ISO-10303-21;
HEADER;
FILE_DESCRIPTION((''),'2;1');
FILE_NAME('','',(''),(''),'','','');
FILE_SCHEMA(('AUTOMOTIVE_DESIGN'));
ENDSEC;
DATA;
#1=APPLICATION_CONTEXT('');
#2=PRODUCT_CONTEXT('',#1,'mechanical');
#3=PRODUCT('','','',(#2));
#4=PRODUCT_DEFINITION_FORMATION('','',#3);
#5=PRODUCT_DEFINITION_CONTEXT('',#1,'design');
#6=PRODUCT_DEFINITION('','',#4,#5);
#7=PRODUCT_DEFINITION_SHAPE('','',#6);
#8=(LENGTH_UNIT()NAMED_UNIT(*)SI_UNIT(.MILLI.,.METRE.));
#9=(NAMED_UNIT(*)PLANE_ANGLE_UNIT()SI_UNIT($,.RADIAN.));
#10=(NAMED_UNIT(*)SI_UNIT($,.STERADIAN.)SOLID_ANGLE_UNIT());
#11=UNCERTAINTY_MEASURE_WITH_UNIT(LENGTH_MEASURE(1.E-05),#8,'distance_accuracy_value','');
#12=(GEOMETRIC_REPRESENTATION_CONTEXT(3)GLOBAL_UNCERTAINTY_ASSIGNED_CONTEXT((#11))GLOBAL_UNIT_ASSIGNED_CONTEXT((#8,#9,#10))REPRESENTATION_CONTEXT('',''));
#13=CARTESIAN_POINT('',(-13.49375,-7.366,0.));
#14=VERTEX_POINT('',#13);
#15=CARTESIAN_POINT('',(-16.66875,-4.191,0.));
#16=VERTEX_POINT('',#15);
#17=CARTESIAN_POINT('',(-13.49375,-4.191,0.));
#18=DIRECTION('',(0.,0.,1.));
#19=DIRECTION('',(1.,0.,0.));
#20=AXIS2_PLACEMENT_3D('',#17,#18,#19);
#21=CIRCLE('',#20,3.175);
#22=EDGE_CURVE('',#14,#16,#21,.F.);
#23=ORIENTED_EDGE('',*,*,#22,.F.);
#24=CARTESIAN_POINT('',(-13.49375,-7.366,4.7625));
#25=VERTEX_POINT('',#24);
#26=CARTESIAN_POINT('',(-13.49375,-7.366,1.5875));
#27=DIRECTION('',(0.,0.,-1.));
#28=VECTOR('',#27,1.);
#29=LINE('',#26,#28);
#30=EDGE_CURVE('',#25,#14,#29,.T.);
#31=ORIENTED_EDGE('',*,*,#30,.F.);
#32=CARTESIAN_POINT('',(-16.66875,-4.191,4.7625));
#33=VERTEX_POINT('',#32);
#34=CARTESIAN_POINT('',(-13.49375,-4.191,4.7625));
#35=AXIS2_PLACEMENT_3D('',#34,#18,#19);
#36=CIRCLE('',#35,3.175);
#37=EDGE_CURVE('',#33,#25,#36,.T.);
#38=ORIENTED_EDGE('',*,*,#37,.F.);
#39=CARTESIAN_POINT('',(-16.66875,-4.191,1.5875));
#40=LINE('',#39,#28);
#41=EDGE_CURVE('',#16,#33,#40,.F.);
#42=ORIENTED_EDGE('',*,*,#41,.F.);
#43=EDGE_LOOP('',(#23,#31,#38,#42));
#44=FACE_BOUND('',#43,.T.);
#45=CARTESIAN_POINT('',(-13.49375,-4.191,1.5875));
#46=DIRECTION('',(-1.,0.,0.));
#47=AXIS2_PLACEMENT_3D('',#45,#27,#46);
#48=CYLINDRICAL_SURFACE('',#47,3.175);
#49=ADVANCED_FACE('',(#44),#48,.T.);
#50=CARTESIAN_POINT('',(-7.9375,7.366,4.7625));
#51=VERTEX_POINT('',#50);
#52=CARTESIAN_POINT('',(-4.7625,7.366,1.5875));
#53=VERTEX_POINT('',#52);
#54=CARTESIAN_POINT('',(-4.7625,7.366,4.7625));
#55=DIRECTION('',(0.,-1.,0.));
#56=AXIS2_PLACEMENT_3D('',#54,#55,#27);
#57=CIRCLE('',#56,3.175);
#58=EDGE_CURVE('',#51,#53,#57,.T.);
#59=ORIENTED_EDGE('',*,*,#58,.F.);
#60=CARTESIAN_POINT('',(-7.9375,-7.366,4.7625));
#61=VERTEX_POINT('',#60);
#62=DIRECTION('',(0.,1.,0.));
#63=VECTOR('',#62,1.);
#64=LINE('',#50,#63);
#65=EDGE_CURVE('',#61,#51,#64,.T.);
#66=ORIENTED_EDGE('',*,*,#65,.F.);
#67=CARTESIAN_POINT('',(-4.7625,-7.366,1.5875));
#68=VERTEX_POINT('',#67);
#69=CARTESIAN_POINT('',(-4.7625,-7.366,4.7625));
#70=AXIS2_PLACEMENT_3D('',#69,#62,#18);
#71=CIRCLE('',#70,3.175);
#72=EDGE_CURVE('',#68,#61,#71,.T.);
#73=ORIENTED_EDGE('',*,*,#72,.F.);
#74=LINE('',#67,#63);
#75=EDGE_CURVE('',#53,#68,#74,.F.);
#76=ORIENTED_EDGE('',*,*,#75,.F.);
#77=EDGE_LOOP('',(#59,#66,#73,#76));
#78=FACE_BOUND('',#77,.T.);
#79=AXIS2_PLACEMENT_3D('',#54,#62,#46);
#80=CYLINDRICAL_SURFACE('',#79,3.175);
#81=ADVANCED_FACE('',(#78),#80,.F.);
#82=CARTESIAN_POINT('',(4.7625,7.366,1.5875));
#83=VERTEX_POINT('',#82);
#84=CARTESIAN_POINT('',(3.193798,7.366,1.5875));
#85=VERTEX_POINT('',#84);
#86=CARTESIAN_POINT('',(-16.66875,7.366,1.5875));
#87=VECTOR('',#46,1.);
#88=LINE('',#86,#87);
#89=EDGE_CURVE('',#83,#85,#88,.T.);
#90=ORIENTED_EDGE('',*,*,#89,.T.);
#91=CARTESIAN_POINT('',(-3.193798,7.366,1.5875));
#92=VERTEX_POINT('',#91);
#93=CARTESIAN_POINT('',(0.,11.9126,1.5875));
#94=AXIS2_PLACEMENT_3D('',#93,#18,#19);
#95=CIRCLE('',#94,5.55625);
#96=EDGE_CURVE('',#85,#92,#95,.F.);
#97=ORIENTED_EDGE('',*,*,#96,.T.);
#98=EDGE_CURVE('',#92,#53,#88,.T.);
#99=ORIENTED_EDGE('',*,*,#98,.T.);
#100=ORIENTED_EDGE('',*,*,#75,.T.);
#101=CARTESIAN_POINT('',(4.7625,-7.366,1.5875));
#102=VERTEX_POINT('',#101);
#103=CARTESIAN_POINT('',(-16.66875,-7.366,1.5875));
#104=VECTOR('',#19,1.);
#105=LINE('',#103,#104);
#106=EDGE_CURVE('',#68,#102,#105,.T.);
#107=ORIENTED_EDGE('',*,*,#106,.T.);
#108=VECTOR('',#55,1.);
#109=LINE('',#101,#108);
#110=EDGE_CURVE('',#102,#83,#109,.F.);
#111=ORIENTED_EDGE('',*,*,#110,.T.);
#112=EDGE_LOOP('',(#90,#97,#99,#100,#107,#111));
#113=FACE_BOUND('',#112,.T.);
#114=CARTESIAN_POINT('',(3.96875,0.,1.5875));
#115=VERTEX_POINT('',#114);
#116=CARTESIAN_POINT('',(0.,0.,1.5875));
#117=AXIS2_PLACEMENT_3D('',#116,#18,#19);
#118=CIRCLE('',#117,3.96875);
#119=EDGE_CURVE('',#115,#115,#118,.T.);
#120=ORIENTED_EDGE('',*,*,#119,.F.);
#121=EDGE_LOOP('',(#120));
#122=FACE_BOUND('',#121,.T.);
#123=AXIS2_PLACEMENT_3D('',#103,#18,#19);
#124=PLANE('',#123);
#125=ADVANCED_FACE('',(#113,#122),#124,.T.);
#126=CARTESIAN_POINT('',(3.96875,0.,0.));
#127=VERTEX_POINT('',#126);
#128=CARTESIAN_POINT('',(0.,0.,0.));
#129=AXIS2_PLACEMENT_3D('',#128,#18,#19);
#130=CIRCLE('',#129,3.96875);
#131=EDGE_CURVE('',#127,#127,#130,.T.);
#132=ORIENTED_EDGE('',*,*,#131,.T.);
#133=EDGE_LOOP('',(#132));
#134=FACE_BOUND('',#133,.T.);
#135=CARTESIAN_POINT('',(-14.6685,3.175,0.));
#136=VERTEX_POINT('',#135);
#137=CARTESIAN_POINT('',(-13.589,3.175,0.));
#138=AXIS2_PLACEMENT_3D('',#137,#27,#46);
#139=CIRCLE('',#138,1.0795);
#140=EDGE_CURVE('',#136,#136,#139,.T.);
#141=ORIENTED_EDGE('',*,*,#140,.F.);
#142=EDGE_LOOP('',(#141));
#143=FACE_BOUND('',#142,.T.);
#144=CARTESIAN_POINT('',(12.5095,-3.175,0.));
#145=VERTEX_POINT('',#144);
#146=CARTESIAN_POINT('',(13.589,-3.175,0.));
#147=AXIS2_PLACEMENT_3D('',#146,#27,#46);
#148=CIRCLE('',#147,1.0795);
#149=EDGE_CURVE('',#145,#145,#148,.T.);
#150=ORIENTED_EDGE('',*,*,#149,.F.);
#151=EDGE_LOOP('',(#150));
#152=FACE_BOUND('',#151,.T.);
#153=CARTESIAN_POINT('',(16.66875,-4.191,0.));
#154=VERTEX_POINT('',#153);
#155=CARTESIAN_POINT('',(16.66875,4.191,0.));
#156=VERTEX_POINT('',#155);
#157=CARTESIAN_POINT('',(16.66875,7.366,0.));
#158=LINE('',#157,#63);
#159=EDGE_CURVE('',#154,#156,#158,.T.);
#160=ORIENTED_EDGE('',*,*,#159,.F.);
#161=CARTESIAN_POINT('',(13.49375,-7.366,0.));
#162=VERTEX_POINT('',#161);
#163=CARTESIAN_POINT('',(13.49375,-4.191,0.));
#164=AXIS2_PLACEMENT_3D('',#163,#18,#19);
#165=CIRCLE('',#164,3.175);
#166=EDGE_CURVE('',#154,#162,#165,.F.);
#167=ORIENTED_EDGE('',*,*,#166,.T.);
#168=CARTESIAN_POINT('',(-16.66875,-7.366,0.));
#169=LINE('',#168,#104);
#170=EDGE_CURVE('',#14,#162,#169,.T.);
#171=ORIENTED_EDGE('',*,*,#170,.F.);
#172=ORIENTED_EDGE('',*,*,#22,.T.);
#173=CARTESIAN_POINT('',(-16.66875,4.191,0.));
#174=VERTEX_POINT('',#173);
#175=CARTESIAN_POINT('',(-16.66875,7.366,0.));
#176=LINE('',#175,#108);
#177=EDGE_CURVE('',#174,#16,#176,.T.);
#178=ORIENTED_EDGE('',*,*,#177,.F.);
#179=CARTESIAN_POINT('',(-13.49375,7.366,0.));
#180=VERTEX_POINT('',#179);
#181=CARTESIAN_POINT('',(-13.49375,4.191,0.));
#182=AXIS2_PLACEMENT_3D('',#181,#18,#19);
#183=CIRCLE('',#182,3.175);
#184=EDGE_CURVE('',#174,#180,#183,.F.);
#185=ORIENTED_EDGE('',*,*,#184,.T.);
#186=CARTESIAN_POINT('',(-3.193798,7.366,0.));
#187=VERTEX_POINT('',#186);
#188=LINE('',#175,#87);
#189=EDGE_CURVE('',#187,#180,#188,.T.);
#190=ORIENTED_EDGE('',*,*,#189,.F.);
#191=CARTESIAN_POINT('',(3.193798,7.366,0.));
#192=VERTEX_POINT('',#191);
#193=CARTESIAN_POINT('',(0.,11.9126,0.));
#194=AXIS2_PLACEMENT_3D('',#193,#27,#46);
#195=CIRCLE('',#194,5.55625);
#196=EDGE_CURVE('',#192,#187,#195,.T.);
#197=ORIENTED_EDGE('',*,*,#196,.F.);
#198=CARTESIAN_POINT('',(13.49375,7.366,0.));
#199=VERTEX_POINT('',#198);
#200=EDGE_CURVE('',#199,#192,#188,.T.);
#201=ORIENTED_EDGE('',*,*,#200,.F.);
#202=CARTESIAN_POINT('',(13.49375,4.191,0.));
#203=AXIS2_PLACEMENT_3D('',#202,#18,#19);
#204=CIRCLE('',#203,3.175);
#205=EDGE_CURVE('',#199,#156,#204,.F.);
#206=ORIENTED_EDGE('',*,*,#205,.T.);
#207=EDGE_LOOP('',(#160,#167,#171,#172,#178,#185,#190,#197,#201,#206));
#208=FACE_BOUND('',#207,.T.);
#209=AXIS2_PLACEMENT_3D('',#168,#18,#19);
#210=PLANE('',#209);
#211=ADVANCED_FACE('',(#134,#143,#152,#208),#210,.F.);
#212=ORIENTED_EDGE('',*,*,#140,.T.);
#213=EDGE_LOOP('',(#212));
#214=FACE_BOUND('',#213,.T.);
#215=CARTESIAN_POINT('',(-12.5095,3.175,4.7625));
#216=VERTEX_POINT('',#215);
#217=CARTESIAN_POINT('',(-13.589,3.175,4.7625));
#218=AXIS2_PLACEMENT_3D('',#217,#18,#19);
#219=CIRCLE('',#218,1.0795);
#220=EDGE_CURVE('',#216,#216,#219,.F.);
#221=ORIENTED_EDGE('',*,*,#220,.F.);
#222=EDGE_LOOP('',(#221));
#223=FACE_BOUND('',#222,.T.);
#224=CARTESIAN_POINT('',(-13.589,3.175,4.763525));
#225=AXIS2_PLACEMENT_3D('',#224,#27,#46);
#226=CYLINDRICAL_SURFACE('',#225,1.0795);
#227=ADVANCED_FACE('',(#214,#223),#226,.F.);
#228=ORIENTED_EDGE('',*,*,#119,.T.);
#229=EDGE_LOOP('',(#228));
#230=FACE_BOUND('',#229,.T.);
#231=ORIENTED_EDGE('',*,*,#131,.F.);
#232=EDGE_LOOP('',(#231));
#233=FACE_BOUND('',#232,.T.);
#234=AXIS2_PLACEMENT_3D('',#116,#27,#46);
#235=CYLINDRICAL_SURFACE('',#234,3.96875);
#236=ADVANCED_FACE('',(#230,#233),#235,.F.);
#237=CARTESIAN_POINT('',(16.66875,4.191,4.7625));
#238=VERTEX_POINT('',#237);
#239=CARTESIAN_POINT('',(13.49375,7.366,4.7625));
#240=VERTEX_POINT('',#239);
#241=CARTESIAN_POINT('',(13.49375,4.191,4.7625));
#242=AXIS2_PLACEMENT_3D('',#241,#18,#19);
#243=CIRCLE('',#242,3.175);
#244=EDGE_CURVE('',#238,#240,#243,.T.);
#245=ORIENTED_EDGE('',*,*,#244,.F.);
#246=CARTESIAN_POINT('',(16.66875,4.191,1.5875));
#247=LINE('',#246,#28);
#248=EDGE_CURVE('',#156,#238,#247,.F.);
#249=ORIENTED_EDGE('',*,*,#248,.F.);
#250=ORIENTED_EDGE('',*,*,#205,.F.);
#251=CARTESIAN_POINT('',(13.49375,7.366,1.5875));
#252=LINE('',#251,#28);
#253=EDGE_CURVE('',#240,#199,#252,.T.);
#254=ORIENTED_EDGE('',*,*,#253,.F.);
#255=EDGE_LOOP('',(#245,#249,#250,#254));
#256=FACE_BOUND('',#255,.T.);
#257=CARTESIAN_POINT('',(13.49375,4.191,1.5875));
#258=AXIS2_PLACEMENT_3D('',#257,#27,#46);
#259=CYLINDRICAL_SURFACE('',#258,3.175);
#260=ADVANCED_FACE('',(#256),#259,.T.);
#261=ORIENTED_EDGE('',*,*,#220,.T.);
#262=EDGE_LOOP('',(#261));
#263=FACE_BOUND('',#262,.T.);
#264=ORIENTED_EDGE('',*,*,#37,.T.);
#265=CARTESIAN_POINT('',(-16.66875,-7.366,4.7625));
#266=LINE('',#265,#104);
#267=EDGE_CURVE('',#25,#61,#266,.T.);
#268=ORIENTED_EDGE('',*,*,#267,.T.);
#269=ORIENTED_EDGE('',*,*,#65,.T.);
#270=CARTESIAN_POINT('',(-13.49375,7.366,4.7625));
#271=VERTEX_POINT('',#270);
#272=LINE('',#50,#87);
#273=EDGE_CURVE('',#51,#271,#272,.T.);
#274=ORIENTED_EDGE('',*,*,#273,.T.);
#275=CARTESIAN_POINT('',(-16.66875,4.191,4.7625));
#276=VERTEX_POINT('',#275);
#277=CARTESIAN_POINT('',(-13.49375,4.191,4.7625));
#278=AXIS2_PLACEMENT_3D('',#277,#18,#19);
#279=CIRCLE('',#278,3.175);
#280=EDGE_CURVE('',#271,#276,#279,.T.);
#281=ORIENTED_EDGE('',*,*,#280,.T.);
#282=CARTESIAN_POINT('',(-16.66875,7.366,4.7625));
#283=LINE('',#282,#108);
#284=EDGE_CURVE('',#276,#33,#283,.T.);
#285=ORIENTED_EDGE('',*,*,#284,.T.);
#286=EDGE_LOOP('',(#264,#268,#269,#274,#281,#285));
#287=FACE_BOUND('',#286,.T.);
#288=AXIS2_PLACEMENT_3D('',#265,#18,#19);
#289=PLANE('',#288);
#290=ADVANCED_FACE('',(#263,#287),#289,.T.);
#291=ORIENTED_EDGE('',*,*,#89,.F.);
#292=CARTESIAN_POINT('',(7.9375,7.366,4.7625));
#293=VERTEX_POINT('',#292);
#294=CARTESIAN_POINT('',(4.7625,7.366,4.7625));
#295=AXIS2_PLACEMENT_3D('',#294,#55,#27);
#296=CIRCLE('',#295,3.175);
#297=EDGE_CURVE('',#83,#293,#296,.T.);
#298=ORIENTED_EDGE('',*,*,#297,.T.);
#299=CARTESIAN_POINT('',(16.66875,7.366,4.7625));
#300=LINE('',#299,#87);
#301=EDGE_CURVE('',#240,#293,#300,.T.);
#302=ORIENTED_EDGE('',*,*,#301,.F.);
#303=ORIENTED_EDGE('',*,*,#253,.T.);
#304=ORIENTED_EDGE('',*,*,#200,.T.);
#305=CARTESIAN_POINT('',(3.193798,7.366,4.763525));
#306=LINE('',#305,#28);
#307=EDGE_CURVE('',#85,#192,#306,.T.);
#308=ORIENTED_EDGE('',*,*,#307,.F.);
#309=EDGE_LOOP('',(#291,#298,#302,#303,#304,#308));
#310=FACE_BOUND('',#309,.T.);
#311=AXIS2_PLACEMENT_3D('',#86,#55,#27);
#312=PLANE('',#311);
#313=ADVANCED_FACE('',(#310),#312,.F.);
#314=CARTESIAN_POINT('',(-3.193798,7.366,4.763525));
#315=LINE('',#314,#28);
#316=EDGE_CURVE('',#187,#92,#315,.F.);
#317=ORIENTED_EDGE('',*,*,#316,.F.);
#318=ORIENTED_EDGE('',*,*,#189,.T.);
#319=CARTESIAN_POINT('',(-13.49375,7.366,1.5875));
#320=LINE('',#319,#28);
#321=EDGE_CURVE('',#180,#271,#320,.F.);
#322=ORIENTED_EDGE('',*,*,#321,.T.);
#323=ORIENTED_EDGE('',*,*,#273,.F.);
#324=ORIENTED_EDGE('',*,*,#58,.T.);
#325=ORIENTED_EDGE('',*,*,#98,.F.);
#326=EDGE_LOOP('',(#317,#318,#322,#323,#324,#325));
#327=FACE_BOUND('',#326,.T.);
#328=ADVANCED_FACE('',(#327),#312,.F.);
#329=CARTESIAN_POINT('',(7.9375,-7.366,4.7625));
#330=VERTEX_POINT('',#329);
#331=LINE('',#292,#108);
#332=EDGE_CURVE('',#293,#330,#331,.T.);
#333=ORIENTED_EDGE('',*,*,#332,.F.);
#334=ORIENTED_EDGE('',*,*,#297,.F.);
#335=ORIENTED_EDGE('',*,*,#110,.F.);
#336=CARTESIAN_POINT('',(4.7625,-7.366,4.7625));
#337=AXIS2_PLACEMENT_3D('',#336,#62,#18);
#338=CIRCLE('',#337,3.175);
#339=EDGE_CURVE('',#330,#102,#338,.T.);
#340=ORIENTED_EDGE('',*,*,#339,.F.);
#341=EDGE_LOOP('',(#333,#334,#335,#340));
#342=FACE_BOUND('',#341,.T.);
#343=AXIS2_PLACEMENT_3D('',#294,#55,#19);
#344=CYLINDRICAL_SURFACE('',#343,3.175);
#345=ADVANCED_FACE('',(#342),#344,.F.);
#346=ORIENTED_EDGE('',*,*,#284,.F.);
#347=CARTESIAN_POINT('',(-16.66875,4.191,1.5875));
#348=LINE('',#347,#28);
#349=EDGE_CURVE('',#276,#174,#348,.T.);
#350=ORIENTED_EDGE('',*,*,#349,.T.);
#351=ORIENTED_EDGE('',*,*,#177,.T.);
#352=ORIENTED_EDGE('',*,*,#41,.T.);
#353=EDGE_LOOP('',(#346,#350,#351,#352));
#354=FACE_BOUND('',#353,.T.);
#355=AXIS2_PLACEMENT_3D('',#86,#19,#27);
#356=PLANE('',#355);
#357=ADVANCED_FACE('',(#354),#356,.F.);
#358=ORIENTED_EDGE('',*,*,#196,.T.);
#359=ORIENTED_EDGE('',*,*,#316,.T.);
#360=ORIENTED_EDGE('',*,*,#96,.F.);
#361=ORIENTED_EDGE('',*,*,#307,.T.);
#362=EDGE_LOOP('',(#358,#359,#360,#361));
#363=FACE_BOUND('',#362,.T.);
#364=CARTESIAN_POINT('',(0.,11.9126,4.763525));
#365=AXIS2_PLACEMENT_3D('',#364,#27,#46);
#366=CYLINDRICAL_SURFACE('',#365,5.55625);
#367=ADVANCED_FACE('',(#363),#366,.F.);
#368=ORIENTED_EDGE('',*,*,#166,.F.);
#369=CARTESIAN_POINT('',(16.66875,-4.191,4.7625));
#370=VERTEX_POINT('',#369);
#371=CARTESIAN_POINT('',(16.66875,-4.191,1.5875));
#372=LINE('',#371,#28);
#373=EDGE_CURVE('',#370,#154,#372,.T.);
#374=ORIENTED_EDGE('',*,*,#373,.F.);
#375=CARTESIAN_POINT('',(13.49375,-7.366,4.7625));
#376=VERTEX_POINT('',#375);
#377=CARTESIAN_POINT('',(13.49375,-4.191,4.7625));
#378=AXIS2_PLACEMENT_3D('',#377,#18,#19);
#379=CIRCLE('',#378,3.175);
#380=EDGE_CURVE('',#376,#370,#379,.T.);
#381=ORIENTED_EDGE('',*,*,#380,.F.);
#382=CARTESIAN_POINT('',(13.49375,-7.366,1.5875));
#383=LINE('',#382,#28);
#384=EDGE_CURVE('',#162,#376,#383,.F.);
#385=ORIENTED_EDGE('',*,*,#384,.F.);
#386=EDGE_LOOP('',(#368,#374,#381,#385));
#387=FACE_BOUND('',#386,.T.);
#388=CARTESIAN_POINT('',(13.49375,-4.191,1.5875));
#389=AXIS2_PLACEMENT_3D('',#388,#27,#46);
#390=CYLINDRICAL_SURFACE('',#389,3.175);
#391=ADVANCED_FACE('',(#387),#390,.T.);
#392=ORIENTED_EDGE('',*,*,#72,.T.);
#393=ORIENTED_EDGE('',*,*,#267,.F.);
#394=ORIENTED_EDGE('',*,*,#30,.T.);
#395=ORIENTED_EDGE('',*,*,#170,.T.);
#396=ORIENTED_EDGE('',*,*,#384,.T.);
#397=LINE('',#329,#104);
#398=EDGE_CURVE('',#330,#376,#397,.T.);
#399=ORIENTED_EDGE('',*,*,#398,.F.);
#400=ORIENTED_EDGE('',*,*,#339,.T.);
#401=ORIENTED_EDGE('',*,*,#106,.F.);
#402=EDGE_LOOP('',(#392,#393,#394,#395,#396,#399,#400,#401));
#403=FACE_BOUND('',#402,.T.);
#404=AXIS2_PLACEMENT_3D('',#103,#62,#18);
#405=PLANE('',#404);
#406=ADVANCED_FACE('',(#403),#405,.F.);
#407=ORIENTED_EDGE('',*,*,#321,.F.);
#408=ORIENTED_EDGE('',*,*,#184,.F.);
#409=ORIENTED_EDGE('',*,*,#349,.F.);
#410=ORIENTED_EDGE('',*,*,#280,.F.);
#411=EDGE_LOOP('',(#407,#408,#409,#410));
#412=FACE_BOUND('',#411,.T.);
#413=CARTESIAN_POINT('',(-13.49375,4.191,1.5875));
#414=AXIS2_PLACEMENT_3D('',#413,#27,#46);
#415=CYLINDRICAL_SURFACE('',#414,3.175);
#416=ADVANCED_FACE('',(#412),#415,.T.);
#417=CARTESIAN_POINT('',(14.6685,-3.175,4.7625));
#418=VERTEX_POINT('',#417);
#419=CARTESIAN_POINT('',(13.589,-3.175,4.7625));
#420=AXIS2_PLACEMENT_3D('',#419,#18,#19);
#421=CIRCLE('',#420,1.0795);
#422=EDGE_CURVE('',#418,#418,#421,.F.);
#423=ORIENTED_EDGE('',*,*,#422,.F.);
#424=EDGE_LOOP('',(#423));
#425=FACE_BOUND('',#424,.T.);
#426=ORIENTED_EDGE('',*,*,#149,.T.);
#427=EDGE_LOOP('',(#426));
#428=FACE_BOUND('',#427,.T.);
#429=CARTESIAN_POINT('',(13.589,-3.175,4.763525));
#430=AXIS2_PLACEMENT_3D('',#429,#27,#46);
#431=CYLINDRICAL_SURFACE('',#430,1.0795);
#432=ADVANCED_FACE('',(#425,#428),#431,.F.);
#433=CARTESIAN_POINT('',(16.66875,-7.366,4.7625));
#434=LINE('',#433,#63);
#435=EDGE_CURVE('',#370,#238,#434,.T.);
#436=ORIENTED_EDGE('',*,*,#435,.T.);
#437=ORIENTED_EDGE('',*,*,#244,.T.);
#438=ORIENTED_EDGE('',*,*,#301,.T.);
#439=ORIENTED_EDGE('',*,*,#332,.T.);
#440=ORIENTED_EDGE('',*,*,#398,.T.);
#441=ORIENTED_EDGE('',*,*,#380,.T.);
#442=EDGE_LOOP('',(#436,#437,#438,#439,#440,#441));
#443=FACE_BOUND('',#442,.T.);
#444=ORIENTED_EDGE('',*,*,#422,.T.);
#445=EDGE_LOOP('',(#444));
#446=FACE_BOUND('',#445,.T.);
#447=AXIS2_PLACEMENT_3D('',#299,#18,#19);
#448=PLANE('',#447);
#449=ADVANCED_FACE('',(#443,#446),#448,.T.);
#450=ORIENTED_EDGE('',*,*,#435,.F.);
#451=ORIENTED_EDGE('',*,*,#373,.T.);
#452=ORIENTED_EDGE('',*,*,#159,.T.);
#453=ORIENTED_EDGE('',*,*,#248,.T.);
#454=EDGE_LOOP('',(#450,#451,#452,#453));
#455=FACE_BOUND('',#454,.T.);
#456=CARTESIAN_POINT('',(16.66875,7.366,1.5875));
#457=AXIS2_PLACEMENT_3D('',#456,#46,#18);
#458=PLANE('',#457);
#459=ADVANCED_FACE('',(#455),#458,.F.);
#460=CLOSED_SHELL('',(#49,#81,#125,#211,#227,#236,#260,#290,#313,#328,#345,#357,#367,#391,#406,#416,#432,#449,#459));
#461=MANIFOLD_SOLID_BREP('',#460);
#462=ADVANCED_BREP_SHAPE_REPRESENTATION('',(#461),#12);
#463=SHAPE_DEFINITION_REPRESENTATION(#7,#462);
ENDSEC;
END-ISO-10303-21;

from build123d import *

# Parameters (mm, degrees)
SKETCH1_W          = 33.3375
SKETCH1_H          = 14.732
SKETCH1_R          = 3.96875
EXTRUDE1_DEPTH     = 1.5875
SKETCH3_W          = 8.73125
SKETCH3_H          = 14.732
EXTRUDE2_DEPTH     = 3.175
CUT_EXTRUDE1_START = -4.7625
SKETCH2_R          = 1.0795
SKETCH2_R_2        = 5.55625
CUT_EXTRUDE1_DEPTH = 4.7625
FILLET2_R          = 3.175
SPLIT1_DEPTH       = 4.7625


# Read off the part's stored shape, not the designer's step: Split1
with BuildPart() as part:
    # Sketch1 → Extrude1 (new body)
    with BuildSketch(Plane.XY):
        Rectangle(SKETCH1_W, SKETCH1_H)
        Circle(SKETCH1_R, mode=Mode.SUBTRACT)
    extrude(amount=EXTRUDE1_DEPTH)

    # Sketch3 → Extrude2 (add)
    with BuildSketch(Plane.XY.offset(1.5875)):
        with Locations((-12.303125, 0)):
            Rectangle(SKETCH3_W, SKETCH3_H)
        with Locations((12.303125, 0)):
            Rectangle(SKETCH3_W, SKETCH3_H)
    extrude(amount=EXTRUDE2_DEPTH)

    # Sketch2 → Cut-Extrude1 (cut)
    with BuildSketch(Plane(origin=(0, 0, 0), x_dir=(-1, 0, 0), z_dir=(0, 0, -1)).offset(CUT_EXTRUDE1_START)):
        with Locations((-13.589, -3.175)):
            Circle(SKETCH2_R)
        with Locations((13.589, 3.175)):
            Circle(SKETCH2_R)
        with Locations((0, 11.9126)):
            Circle(SKETCH2_R_2)
    extrude(amount=CUT_EXTRUDE1_DEPTH, mode=Mode.SUBTRACT)

    # Fillet2
    fillet2_edges = [part.edges().sort_by_distance(p)[0] for p in [
        (-7.9375, 0, 1.5875),
        (7.9375, 0, 1.5875),
    ]]
    fillet(fillet2_edges, radius=FILLET2_R - 0.0001)  # a hair under: the kernel refuses the full size

    # Split1 outline → Split1 (cut)
    with BuildSketch(Plane.XY):
        with BuildLine():
            Line((-16.66875, -7.366), (-13.49375, -7.366))
            ThreePointArc((-13.49375, -7.366), (-15.73881403, -6.43606403), (-16.66875, -4.191))
            Line((-16.66875, -4.191), (-16.66875, -7.366))
        make_face()
        with BuildLine():
            ThreePointArc((13.49375, 7.366), (15.73881403, 6.43606403), (16.66875, 4.191))
            Line((16.66875, 4.191), (16.66875, 7.366))
            Line((16.66875, 7.366), (13.49375, 7.366))
        make_face()
        with BuildLine():
            ThreePointArc((16.66875, -4.191), (15.73881403, -6.43606403), (13.49375, -7.366))
            Line((13.49375, -7.366), (16.66875, -7.366))
            Line((16.66875, -7.366), (16.66875, -4.191))
        make_face()
        with BuildLine():
            Line((-16.66875, 7.366), (-16.66875, 4.191))
            ThreePointArc((-16.66875, 4.191), (-15.73881403, 6.43606403), (-13.49375, 7.366))
            Line((-13.49375, 7.366), (-16.66875, 7.366))
        make_face()
    extrude(amount=SPLIT1_DEPTH, mode=Mode.SUBTRACT)


solid = part.part
